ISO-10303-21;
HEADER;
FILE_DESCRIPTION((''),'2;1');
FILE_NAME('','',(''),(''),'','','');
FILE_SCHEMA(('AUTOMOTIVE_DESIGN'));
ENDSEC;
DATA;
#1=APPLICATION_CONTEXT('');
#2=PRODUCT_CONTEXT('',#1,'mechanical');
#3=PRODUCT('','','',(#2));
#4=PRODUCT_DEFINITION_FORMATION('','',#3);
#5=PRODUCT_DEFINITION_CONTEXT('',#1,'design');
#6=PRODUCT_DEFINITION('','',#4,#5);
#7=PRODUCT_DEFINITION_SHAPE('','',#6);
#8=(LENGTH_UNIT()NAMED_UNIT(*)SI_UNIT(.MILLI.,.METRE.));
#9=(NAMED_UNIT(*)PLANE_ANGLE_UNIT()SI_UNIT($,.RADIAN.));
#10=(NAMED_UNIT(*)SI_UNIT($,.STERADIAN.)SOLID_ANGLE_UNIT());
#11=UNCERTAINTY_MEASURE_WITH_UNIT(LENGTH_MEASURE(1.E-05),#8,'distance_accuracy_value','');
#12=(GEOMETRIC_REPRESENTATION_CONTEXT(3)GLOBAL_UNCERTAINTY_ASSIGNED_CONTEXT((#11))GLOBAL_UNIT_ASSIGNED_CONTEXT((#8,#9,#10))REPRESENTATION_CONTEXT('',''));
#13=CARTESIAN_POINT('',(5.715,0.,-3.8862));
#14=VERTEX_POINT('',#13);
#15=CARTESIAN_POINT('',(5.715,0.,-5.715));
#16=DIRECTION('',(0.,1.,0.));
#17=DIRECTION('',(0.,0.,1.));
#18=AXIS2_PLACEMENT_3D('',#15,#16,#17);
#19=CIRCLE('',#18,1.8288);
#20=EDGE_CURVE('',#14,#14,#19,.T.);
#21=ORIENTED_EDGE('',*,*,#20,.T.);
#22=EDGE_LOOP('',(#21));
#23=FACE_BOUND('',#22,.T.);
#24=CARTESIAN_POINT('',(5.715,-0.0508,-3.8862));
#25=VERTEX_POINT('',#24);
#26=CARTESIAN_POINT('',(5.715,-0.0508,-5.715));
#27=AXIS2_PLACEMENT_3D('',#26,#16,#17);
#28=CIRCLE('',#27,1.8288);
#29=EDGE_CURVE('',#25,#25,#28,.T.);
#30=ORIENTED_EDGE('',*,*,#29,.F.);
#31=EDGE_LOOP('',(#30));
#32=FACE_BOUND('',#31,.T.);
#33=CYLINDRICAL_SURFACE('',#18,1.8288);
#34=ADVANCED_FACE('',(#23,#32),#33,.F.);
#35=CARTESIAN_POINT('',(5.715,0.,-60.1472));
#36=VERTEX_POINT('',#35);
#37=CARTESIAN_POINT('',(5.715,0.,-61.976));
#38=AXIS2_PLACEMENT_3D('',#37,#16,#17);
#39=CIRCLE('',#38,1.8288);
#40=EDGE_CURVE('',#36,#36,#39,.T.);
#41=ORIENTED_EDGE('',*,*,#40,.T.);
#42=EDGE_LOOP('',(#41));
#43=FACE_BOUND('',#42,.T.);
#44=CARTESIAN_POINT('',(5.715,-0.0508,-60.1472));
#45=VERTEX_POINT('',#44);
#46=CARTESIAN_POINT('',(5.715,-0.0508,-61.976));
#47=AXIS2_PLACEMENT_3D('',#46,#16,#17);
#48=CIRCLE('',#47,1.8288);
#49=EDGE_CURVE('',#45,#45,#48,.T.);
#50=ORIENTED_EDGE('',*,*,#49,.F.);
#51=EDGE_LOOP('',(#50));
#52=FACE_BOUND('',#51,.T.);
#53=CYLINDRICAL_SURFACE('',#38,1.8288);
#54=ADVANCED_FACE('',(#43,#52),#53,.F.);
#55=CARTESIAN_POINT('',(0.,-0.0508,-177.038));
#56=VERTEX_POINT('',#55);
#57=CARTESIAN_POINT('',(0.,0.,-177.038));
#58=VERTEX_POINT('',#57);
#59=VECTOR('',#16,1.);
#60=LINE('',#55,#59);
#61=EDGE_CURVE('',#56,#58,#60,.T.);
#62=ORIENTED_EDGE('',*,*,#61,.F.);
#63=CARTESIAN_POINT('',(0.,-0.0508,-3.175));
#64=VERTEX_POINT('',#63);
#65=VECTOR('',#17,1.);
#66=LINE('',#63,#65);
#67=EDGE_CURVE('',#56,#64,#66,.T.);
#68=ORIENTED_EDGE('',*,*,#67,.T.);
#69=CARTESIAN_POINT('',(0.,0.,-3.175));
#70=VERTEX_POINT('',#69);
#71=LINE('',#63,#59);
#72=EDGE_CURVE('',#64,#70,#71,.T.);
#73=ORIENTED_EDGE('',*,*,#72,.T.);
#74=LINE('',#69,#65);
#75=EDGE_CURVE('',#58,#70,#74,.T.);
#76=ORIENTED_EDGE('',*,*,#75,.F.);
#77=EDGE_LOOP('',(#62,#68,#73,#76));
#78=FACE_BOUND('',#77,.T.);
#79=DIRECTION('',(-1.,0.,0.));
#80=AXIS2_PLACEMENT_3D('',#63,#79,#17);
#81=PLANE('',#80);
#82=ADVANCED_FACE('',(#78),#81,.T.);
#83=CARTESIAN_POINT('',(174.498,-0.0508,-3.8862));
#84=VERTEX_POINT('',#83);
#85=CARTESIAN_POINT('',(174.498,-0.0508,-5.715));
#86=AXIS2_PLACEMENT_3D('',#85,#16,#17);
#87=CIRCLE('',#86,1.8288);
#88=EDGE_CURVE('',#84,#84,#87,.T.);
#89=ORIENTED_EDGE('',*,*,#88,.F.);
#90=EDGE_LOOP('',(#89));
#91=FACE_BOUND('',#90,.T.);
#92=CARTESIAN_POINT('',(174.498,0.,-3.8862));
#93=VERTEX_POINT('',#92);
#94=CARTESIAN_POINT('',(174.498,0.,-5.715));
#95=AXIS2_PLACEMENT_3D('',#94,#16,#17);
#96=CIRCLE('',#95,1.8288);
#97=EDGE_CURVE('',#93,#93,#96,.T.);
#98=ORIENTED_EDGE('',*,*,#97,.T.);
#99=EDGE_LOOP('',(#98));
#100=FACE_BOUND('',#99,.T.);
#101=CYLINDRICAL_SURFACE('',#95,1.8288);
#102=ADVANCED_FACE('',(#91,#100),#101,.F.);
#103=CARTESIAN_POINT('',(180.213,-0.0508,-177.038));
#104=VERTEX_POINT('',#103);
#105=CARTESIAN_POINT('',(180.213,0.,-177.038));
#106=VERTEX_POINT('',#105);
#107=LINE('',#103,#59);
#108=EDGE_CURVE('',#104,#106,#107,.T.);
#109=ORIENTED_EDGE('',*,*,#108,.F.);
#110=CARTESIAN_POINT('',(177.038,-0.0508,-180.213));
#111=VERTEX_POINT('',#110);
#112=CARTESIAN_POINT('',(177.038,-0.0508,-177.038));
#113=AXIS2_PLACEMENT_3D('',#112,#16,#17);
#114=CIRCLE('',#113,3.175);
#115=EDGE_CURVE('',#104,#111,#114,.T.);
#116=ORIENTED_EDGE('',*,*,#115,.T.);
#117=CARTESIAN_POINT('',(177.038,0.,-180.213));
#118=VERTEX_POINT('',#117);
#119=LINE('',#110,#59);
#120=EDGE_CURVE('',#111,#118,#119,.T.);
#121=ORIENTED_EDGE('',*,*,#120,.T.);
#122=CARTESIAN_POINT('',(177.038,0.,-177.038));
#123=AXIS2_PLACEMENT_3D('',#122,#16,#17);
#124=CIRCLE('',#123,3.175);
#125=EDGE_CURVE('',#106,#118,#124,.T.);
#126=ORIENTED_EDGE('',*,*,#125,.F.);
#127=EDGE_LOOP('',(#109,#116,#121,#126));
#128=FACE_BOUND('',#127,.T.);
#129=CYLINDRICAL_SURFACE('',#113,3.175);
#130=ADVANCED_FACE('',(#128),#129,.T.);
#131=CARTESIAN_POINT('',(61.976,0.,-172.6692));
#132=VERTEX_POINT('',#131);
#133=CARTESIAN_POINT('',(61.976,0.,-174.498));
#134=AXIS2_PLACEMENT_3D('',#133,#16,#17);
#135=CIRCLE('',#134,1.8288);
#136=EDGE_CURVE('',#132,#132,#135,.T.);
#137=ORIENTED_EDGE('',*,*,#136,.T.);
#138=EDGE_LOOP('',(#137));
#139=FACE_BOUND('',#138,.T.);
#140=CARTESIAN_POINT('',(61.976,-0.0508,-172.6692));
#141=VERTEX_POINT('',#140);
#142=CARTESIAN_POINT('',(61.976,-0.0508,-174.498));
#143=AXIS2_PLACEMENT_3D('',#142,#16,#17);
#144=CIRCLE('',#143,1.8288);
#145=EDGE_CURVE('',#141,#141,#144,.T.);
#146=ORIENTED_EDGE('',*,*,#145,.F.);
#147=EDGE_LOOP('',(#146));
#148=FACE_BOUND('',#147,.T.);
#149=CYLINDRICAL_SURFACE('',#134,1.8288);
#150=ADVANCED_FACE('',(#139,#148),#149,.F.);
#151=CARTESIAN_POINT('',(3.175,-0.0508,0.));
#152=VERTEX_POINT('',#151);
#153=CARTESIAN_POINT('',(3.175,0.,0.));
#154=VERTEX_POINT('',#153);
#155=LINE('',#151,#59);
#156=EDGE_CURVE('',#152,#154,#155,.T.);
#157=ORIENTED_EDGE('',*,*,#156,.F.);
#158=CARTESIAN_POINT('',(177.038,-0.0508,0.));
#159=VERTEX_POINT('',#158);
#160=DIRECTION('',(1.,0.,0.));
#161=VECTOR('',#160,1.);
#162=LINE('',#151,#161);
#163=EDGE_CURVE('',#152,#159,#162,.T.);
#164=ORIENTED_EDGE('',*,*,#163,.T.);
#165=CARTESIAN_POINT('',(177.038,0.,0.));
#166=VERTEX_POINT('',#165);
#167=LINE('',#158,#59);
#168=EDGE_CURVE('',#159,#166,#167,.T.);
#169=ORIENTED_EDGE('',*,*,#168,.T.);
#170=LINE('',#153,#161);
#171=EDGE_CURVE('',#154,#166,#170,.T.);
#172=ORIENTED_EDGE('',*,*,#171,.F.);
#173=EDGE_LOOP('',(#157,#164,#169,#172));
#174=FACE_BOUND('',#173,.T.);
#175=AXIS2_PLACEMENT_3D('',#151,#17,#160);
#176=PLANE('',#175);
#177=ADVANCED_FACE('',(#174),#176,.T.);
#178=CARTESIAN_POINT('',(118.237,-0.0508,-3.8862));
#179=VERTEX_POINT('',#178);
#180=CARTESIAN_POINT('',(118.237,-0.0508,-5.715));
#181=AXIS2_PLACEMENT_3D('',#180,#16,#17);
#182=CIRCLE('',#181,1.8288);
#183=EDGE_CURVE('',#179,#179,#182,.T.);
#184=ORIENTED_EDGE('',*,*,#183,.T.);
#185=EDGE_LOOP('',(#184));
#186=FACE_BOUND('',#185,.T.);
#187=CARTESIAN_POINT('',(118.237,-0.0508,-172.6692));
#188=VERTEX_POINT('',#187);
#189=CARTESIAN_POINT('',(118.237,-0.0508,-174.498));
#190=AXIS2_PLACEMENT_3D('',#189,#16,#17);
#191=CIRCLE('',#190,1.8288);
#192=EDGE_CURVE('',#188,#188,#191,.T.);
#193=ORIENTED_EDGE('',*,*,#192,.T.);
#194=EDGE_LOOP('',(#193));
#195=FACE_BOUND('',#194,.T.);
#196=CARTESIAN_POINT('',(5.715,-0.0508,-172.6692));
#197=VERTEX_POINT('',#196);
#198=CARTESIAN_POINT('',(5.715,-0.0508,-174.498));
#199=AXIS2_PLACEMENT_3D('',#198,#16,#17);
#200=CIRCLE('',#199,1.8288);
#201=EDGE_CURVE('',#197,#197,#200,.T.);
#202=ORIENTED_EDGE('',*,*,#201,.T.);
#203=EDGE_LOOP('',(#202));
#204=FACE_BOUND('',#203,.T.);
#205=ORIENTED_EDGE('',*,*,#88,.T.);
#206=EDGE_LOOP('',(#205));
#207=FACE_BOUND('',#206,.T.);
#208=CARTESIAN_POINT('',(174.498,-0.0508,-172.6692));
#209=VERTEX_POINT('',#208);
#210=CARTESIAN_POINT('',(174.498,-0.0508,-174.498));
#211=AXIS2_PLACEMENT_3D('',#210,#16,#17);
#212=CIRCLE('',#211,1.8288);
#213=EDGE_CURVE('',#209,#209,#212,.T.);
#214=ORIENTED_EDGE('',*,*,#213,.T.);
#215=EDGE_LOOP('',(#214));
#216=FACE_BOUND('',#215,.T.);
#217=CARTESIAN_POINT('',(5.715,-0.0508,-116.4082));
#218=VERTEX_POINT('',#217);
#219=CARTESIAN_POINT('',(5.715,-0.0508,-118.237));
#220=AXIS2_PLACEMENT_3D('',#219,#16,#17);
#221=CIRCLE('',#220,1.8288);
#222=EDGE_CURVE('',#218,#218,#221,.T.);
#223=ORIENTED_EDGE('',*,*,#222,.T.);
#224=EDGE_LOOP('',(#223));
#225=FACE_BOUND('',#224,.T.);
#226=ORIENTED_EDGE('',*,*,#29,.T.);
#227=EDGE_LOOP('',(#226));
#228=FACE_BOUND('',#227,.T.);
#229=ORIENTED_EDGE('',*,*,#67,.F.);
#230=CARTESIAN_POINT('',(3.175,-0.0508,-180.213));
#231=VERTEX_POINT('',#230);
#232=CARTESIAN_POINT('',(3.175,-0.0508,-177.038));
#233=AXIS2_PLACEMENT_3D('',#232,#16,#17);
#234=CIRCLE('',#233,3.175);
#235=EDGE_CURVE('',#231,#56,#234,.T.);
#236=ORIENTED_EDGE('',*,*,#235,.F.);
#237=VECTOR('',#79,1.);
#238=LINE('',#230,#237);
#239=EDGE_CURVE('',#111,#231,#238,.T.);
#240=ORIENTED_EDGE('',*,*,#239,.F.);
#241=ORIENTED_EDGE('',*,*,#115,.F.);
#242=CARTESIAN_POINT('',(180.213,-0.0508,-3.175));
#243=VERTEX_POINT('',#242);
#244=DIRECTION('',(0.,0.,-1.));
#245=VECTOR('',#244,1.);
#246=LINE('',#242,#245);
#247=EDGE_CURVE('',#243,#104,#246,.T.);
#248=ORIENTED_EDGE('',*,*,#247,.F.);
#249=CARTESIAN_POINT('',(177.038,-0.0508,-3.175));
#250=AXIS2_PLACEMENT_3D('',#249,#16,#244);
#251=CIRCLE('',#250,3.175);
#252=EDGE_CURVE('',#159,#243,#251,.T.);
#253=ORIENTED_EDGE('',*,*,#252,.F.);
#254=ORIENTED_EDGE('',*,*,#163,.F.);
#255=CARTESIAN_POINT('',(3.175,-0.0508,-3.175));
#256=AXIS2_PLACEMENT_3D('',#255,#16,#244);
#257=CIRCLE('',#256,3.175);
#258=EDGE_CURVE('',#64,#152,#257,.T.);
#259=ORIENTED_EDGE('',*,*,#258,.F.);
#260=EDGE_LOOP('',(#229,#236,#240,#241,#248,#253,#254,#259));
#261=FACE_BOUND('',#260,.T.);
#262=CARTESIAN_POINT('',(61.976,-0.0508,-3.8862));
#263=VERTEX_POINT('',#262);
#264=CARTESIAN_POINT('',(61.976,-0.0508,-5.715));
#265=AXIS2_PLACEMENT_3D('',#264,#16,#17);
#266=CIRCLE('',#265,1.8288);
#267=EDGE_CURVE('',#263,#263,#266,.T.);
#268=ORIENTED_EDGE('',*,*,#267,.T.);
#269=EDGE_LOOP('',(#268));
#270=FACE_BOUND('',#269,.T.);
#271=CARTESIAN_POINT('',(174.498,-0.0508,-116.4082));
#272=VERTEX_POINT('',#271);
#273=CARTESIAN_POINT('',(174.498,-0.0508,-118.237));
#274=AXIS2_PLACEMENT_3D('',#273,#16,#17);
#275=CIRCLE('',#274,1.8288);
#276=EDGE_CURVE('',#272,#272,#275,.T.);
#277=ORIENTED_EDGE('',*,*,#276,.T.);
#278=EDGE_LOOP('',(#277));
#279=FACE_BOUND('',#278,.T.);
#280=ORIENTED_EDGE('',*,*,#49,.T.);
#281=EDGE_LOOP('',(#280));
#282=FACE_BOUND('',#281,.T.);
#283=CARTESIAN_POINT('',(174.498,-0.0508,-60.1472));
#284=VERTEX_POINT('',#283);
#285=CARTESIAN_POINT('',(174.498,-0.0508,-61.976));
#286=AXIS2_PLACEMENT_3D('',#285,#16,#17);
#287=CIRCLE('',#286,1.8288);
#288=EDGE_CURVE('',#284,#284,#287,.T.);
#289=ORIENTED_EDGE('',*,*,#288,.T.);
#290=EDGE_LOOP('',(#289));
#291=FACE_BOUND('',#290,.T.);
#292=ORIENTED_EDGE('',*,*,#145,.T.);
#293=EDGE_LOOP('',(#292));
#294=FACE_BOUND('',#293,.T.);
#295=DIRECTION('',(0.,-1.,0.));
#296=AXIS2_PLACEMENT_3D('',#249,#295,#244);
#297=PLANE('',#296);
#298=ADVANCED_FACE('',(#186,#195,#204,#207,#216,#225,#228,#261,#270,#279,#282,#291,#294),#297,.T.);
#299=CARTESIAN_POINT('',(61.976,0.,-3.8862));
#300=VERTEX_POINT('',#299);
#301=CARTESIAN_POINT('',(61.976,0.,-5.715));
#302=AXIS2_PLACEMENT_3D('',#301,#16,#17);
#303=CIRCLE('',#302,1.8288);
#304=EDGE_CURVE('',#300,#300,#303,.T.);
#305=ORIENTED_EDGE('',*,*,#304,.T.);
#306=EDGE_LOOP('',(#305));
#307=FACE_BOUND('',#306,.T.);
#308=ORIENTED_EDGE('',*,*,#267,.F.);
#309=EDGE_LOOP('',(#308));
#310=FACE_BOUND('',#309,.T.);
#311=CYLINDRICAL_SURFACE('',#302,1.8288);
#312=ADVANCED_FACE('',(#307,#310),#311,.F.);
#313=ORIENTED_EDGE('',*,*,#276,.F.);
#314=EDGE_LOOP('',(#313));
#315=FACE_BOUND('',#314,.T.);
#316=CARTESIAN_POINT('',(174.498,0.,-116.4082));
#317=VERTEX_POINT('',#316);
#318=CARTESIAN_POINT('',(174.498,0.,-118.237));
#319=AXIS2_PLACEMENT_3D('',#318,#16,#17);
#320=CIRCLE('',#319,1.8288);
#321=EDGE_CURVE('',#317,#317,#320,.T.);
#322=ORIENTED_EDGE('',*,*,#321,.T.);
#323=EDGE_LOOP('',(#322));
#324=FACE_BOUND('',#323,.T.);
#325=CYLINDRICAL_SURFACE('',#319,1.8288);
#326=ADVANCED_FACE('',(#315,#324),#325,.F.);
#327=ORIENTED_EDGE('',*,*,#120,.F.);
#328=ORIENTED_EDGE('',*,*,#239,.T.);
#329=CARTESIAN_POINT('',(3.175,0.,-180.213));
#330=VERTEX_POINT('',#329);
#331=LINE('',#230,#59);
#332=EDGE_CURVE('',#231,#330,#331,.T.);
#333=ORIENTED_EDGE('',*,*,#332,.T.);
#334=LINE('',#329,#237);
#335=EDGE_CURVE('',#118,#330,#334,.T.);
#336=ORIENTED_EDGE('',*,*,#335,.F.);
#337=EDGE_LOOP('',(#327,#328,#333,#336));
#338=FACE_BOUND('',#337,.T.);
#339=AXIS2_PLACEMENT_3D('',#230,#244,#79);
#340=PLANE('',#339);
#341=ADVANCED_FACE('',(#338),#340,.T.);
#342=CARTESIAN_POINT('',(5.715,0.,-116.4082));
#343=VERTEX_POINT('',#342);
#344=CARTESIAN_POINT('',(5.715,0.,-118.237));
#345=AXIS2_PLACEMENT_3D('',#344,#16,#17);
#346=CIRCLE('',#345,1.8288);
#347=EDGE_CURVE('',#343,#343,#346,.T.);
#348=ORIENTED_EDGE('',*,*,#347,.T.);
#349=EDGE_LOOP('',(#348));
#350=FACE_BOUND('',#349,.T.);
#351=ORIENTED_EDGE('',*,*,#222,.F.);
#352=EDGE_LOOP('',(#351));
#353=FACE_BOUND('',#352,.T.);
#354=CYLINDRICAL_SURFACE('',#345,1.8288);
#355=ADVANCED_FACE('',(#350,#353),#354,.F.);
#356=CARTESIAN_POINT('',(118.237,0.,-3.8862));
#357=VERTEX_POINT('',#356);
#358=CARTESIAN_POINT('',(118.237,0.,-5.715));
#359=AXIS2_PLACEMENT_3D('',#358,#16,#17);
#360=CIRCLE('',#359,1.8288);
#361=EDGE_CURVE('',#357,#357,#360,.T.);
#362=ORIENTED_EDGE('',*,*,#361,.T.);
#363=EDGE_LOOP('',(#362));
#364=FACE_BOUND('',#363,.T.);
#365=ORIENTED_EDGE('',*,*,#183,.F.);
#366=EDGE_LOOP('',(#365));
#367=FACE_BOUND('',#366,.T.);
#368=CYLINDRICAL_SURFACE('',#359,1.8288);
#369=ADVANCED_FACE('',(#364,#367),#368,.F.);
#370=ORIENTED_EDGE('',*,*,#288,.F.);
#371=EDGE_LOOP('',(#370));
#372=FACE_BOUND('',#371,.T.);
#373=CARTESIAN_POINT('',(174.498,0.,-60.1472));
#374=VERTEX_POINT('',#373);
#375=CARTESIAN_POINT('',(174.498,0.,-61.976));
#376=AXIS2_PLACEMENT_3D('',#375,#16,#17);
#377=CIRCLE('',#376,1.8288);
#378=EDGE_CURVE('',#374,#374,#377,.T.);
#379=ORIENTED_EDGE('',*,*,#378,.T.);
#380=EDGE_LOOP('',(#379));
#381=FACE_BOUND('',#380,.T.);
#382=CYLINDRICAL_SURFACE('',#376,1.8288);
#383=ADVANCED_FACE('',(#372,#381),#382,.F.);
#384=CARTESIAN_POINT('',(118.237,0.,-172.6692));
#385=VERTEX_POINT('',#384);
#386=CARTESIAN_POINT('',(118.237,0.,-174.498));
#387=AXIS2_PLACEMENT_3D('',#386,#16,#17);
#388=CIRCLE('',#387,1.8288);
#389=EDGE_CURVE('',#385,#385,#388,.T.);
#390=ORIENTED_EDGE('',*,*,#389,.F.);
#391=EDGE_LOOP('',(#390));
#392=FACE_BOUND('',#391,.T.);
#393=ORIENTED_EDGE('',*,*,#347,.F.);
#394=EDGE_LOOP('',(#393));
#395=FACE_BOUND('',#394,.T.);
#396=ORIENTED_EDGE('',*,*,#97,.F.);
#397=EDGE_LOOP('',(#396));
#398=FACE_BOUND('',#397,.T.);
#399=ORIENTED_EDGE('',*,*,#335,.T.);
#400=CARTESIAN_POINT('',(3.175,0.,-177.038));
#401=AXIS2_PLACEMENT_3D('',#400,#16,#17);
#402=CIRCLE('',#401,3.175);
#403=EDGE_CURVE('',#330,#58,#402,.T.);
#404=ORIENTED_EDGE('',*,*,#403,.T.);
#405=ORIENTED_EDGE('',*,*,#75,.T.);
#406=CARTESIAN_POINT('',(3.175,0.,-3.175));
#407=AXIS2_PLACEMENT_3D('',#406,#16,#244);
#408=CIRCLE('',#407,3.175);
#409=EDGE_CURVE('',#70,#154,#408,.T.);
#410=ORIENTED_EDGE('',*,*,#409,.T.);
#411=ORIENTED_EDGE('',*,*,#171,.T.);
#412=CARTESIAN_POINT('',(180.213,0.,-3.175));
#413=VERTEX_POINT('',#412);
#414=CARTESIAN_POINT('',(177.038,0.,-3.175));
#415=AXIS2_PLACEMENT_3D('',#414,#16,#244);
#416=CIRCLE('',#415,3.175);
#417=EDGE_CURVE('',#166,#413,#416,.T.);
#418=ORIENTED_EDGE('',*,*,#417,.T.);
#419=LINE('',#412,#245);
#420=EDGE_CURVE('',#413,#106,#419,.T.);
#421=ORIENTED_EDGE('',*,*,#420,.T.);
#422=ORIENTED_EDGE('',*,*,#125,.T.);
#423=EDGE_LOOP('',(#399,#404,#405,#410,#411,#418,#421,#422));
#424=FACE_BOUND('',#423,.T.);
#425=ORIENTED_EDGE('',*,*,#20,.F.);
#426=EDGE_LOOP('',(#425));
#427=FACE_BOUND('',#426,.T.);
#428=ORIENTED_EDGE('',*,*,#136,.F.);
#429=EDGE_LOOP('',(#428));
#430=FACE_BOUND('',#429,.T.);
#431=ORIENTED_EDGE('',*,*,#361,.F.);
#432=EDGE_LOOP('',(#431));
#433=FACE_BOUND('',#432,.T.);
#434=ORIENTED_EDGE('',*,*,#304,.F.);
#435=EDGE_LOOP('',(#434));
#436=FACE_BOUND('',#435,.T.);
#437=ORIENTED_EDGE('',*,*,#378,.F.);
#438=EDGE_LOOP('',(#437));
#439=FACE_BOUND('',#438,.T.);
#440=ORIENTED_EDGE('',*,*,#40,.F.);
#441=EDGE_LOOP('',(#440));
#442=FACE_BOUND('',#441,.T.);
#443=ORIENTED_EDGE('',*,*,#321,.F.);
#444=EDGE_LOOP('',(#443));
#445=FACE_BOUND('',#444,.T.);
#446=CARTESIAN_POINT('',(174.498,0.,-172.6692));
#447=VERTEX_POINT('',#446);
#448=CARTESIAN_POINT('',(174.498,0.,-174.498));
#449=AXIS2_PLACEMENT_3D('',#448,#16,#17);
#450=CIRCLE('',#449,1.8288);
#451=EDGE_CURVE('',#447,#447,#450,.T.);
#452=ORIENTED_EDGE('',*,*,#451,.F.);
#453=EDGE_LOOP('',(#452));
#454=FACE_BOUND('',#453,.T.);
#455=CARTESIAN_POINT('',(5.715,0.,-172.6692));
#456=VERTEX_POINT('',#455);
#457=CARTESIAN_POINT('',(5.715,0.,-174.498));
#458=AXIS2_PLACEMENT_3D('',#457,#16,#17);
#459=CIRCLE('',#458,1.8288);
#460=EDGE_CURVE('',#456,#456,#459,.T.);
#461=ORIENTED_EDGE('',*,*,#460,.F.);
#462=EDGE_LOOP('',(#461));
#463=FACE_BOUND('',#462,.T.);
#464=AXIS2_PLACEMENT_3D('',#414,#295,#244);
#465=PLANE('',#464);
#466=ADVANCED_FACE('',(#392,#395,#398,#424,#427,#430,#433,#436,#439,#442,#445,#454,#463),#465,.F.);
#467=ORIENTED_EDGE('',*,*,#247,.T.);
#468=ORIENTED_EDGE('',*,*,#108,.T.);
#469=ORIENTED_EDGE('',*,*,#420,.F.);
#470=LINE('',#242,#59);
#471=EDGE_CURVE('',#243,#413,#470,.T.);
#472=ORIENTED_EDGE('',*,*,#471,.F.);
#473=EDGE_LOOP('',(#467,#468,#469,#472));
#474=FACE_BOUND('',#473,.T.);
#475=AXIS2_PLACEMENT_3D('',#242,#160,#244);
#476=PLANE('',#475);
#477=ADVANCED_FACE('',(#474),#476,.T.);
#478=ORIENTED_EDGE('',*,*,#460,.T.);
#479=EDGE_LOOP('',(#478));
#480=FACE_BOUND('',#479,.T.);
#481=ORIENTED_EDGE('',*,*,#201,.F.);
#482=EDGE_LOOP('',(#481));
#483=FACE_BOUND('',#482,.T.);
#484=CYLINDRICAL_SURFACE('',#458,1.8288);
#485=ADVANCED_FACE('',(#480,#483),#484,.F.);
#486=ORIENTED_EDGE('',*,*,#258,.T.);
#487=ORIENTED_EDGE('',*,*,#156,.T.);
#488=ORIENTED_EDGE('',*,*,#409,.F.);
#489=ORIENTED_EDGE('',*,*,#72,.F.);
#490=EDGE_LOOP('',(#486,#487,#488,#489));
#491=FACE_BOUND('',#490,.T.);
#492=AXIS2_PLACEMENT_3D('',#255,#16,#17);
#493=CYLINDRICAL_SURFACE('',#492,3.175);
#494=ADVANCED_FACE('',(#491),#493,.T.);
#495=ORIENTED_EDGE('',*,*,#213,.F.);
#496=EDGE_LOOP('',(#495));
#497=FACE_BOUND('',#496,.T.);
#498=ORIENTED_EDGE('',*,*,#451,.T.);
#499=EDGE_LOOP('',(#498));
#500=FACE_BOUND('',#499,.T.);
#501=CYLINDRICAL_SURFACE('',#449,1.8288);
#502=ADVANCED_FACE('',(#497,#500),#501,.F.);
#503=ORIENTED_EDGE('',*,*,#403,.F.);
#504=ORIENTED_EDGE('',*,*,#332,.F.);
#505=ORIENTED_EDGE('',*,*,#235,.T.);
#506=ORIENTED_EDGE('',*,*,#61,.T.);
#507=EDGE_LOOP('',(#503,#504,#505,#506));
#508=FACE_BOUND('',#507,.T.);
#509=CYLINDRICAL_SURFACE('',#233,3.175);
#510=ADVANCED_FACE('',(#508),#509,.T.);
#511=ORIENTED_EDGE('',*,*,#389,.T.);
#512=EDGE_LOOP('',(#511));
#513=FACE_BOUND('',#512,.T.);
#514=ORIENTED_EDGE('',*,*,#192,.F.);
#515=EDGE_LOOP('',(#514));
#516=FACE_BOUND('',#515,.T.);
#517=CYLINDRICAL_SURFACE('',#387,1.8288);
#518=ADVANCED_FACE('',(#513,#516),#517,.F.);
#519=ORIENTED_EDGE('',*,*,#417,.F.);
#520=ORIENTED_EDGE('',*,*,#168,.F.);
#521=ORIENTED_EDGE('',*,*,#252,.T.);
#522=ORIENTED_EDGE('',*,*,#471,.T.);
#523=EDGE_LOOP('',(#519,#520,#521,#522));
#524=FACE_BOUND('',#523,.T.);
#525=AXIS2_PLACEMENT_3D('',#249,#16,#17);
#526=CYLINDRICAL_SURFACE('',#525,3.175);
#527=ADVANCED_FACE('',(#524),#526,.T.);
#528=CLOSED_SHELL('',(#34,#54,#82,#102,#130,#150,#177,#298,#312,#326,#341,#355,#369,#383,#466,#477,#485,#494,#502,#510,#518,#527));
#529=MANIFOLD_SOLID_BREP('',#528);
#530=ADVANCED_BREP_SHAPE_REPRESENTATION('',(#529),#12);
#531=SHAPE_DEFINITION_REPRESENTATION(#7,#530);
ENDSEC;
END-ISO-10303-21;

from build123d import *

# Parameters (mm, degrees)
BASE_FLANGE1_DEPTH    = 0.0508
F_6_CLEARANCE_HOLE1_D = 3.6576


# Sheet-metal steps are written as plain solids
with BuildPart() as part:
    # Sketch2 → Base-Flange1 (new body)
    with BuildSketch(Plane(origin=(0, 0, 0), x_dir=(1, 0, 0), z_dir=(0, 1, 0))):
        with BuildLine():
            Line((3.175, 0), (177.038, 0))
            ThreePointArc((177.038, 0), (179.28306403, 0.92993597), (180.213, 3.175))
            Line((180.213, 3.175), (180.213, 177.038))
            ThreePointArc((180.213, 177.038), (179.28306403, 179.28306403), (177.038, 180.213))
            Line((177.038, 180.213), (3.175, 180.213))
            ThreePointArc((3.175, 180.213), (0.92993597, 179.28306403), (0, 177.038))
            Line((0, 177.038), (0, 3.175))
            ThreePointArc((0, 3.175), (0.92993597, 0.92993597), (3.175, 0))
        make_face()
    extrude(amount=-BASE_FLANGE1_DEPTH)

    # #6 Clearance Hole1 (through all)
    with Locations(Plane(origin=(0, 0, 0), x_dir=(1, 0, 0), z_dir=(0, 1, 0))):
        with Locations((118.237, 5.715), (174.498, 5.715), (174.498, 61.976), (174.498, 118.237), (174.498, 174.498), (118.237, 174.498), (61.976, 174.498), (5.715, 174.498), (5.715, 118.237), (5.715, 61.976), (5.715, 5.715), (61.976, 5.715)):
            Hole(F_6_CLEARANCE_HOLE1_D / 2)


solid = part.part
